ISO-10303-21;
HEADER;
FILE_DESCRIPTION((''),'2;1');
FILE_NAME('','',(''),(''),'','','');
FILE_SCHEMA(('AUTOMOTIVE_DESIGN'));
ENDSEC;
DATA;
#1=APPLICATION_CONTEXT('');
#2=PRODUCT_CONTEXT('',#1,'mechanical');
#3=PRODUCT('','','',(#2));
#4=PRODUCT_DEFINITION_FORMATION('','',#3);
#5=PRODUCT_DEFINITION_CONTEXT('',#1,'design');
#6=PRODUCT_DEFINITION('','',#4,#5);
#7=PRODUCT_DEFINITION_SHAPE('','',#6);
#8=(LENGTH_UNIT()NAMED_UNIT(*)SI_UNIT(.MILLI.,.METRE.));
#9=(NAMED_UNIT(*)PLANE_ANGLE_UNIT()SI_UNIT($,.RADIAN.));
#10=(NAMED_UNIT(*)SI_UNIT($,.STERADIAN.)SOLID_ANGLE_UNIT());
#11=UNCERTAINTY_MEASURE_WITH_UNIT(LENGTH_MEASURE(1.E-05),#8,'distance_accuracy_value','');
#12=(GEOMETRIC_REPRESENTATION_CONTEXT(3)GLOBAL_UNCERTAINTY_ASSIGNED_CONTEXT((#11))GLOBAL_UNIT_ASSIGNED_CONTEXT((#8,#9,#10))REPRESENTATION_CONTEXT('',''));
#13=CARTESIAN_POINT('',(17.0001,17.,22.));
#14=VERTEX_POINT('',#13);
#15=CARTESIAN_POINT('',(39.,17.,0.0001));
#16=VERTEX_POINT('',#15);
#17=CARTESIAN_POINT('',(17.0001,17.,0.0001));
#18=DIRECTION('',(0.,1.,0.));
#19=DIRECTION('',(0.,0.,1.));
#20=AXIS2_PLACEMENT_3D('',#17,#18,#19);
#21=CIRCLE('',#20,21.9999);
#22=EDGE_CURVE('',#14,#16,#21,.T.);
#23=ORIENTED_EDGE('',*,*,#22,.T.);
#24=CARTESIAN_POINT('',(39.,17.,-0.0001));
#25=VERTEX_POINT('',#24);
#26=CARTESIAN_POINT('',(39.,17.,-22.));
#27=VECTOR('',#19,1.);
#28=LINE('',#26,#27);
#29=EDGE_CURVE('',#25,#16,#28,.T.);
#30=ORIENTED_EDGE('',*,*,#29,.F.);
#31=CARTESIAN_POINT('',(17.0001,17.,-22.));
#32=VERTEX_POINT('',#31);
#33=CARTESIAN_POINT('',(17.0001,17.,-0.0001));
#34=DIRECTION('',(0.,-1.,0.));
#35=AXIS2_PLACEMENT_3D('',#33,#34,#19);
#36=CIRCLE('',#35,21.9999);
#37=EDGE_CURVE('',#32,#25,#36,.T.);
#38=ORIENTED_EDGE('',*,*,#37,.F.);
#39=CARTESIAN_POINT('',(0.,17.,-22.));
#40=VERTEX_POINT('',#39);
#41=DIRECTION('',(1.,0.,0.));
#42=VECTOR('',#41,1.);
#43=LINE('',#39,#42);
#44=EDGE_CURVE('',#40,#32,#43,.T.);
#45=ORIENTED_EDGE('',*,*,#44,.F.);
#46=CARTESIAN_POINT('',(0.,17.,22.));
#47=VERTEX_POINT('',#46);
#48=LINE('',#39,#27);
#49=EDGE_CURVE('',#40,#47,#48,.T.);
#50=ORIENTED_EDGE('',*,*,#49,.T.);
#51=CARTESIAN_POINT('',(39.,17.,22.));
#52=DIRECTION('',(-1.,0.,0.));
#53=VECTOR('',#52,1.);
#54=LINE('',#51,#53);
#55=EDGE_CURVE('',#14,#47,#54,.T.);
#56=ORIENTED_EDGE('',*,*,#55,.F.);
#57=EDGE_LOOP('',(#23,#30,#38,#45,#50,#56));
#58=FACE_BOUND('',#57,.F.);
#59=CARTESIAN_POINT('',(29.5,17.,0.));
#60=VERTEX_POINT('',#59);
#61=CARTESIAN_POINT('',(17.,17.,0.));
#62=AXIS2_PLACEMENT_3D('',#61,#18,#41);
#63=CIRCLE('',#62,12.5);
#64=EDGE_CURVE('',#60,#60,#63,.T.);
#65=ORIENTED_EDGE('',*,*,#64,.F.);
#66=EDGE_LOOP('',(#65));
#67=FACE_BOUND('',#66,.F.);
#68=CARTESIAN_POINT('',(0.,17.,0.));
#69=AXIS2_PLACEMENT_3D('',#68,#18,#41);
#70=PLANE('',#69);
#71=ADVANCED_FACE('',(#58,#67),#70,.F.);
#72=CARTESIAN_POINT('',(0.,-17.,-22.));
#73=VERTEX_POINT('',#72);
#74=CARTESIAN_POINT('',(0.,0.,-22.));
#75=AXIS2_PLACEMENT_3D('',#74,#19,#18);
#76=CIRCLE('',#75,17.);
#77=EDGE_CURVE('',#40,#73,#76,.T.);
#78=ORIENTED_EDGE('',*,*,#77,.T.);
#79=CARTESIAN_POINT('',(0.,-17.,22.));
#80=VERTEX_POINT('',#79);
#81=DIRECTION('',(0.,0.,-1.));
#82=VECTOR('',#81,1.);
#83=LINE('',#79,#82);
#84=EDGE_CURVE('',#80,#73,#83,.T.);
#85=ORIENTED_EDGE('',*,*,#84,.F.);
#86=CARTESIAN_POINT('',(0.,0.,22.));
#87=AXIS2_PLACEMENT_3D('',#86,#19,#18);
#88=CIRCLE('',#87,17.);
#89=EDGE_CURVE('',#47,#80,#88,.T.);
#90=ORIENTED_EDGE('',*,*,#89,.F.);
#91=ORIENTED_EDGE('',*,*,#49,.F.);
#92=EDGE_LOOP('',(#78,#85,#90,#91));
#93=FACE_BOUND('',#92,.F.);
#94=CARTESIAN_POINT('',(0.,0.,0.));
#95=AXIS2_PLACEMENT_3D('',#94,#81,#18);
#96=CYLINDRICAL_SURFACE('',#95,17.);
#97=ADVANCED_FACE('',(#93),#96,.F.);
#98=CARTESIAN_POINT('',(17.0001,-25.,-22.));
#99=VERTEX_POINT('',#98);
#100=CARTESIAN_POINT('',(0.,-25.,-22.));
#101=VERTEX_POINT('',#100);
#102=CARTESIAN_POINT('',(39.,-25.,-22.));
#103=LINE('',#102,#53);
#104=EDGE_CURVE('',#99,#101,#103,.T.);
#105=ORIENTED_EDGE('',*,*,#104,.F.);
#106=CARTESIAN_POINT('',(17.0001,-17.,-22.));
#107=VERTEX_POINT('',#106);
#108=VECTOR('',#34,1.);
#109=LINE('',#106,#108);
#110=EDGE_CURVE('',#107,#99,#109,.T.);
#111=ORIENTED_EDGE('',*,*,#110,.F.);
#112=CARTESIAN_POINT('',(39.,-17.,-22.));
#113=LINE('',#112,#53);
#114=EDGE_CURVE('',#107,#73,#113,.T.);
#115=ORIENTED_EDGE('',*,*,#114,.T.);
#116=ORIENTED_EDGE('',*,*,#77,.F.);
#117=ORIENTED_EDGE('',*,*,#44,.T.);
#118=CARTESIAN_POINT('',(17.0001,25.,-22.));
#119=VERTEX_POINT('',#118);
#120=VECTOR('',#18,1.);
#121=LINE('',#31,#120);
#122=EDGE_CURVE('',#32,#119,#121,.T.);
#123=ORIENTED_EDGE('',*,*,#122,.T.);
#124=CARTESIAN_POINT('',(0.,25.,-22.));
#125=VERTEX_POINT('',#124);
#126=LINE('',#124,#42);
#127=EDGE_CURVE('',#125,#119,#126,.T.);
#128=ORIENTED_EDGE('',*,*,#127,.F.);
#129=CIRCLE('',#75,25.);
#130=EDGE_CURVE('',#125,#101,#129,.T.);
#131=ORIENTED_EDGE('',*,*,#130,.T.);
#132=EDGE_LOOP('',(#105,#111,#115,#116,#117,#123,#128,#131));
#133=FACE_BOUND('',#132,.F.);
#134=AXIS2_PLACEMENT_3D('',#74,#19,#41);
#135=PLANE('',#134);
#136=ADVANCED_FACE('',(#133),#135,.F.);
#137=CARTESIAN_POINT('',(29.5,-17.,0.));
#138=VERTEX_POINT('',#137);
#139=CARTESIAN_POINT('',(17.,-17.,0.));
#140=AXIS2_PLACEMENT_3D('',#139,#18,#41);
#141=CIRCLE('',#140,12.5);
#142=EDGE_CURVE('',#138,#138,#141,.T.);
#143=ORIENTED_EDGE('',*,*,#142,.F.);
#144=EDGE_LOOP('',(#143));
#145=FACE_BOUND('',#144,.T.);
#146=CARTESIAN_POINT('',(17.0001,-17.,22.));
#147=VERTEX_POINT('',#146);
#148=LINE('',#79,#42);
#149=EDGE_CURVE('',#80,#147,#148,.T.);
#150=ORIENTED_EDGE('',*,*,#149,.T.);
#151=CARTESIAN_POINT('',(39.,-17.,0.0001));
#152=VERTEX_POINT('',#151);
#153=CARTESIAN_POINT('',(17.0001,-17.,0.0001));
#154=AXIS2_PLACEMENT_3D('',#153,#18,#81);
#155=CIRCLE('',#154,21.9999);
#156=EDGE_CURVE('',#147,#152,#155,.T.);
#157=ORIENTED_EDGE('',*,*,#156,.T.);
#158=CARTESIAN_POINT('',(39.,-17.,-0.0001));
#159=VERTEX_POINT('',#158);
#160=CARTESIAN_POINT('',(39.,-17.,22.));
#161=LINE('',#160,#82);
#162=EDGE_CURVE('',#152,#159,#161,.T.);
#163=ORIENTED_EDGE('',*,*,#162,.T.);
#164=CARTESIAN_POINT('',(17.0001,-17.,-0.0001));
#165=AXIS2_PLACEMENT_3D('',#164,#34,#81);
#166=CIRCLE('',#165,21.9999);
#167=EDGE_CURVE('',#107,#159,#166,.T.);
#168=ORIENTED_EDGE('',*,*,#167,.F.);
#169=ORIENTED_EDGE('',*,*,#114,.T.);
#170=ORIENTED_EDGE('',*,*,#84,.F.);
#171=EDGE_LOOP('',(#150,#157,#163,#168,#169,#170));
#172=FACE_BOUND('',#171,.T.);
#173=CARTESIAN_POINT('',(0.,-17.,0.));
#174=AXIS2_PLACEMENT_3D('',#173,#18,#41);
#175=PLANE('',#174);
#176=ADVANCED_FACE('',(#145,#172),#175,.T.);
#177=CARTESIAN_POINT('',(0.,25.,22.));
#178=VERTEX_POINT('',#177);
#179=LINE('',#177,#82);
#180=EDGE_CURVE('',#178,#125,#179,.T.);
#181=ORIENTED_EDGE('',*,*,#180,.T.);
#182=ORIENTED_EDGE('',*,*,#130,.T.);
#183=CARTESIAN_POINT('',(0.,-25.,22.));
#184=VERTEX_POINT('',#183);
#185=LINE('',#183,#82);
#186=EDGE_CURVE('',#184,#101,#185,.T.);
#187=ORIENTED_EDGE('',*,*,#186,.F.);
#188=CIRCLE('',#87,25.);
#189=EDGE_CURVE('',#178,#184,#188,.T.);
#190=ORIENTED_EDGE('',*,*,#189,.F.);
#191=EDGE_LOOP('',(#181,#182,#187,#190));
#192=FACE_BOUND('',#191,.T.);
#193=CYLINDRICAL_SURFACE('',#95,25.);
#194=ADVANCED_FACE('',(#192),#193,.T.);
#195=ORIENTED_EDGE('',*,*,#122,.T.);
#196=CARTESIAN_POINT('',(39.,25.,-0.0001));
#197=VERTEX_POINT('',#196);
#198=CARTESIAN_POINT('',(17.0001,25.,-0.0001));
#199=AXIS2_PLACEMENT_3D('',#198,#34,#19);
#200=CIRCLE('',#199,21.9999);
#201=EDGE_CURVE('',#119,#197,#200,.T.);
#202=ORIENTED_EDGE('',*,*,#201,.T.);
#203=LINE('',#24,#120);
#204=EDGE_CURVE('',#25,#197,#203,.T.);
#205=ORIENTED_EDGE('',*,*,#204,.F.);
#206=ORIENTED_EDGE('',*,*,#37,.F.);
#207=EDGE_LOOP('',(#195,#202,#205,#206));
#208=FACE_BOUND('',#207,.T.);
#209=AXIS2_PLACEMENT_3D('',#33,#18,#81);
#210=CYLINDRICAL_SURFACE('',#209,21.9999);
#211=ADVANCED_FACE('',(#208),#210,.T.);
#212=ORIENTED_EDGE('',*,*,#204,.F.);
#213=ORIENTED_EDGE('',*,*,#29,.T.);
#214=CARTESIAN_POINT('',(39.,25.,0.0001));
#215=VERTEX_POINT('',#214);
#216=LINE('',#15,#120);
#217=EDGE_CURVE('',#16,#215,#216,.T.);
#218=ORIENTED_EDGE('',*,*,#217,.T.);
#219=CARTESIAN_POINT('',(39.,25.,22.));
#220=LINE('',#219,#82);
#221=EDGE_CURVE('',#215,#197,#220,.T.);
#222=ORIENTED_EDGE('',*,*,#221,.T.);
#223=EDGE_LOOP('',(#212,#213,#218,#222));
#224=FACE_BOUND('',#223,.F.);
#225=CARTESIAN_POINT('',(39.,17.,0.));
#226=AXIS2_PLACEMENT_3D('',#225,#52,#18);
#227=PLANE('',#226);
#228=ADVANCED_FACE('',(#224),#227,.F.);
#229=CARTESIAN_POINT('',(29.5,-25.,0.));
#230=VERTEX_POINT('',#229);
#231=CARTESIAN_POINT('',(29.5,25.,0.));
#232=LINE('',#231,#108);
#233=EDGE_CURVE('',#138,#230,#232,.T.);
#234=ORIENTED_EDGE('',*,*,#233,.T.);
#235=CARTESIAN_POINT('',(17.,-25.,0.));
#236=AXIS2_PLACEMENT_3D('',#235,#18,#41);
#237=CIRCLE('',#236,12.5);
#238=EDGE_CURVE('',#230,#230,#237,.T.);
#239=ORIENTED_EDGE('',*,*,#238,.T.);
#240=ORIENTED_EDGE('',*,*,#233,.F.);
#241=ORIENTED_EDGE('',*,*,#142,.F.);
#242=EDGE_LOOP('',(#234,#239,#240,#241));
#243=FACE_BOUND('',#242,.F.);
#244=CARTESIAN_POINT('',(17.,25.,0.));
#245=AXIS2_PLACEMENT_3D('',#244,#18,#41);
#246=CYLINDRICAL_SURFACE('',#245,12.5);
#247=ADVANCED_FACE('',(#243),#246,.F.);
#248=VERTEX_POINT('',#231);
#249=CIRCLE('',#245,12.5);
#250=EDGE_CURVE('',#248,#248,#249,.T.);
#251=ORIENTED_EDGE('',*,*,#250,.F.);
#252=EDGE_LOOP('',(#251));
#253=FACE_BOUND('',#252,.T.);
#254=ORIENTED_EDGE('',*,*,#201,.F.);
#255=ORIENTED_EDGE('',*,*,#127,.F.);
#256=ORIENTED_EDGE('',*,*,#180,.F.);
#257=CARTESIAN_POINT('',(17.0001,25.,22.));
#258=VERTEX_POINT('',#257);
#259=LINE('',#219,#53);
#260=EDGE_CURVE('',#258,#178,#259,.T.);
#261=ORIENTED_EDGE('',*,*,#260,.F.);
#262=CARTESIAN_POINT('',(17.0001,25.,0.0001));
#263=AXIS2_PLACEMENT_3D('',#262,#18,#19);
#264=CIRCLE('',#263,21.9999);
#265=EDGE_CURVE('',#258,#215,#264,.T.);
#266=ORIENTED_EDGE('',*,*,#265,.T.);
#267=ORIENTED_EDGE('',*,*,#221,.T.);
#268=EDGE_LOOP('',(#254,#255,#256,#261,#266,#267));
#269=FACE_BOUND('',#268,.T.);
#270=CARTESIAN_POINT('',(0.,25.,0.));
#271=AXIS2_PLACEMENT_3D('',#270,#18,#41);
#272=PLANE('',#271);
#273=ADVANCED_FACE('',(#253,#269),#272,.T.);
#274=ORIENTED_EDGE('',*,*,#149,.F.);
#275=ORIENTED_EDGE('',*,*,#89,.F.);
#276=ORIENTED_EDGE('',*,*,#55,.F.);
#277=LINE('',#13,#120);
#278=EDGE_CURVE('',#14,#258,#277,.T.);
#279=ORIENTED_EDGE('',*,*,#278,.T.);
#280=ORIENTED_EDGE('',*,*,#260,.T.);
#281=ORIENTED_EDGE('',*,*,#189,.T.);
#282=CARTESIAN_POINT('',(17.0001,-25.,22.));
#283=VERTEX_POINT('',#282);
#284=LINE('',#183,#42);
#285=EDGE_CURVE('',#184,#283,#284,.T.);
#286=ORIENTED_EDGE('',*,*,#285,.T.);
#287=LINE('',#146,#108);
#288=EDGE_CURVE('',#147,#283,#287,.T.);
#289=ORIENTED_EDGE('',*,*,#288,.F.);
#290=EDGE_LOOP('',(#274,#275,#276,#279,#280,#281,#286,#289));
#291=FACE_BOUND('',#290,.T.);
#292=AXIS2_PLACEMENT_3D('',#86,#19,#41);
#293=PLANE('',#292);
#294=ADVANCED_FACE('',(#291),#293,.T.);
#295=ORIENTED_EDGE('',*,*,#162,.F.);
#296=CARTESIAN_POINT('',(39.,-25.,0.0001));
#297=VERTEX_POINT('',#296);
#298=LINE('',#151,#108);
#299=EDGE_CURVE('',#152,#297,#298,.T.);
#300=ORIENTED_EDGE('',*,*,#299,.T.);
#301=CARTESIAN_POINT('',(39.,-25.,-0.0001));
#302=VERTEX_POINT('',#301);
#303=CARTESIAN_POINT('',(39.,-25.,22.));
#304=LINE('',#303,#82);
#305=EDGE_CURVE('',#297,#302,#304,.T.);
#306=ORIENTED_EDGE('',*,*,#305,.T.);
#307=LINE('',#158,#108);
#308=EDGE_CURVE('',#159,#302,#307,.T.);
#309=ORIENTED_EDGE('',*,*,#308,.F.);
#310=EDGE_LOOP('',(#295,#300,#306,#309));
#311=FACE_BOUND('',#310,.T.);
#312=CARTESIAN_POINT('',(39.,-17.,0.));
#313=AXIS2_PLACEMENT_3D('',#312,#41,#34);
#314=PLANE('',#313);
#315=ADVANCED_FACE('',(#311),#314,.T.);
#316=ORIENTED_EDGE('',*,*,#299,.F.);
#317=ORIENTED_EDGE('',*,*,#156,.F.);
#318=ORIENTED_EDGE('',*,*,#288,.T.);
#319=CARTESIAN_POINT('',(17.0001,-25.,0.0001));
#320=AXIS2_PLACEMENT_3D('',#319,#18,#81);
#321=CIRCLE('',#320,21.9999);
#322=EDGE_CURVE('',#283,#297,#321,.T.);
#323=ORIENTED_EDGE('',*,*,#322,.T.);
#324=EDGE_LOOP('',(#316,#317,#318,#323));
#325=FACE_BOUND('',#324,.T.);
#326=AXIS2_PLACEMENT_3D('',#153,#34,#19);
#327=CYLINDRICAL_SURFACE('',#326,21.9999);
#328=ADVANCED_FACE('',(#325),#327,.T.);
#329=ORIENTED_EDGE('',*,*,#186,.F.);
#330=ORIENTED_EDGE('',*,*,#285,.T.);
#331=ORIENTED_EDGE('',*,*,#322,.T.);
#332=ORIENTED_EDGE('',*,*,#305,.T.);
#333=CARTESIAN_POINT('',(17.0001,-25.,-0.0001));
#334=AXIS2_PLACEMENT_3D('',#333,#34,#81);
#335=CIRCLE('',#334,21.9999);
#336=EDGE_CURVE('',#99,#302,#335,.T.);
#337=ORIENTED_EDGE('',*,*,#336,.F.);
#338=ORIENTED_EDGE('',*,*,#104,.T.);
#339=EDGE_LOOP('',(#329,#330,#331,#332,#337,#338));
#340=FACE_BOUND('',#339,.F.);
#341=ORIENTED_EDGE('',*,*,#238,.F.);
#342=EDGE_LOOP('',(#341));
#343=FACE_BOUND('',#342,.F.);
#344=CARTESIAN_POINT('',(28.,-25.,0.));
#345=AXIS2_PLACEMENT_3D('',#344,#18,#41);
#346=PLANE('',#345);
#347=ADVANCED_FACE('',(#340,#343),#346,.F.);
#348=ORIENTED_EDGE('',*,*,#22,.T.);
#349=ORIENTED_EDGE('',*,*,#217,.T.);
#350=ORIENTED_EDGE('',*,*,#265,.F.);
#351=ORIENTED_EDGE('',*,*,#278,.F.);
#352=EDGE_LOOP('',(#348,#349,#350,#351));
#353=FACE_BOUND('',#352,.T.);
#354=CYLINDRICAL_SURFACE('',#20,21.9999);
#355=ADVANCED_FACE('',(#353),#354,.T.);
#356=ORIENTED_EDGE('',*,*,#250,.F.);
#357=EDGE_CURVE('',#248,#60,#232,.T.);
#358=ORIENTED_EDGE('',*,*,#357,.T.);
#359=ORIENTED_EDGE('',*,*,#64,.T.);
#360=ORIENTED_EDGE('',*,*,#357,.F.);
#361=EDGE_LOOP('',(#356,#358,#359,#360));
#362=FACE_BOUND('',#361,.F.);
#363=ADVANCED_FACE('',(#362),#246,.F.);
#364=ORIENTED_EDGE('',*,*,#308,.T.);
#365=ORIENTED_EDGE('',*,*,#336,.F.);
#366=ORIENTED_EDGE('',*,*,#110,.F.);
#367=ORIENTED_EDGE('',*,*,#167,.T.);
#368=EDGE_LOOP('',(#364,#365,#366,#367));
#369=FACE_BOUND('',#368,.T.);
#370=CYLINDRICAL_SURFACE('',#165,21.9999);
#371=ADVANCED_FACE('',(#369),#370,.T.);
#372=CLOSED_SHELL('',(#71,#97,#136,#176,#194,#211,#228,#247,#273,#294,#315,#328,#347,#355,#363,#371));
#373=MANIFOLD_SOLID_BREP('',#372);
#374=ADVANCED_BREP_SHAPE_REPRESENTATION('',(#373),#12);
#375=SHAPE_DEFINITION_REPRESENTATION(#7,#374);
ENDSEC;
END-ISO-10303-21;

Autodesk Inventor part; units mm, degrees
ref_plane "YZ Plane" through (0, 0, 0) normal (1, 0, 0) x (0, 1, 0)
ref_plane "XZ Plane" through (0, 0, 0) normal (0, 1, 0) x (-1, 0, 0)
ref_plane "XY Plane" through (0, 0, 0) normal (0, 0, 1) x (1, 0, 0)
sketch "草圖1" plane through (0, 0, 0) normal (0, 0, 1) x (1, 0, 0)
  arc A0 (0, 17) -> (0, -17) centre (0, 0) ccw
  arc A1 (0, 25) -> (0, -25) centre (0, 0) ccw
  line L0 (0, 27.0608) -> (0, -29.1984) construction
  line L1 (0, 25) -> (28, 25)
  line L2 (0, 17) -> (28, 17)
  line L3 (28, 25) -> (39, 25)
  line L4 (28, 17) -> (39, 17)
  line L5 (39, 17) -> (39, 25)
  line L6 (0, 0) -> (33.5, 0) construction
  line L7 (0, -25) -> (28, -25)
  line L8 (0, -17) -> (28, -17)
  line L9 (28, -25) -> (39, -25)
  line L10 (28, -17) -> (39, -17)
  line L11 (39, -17) -> (39, -25)
  dimension "d0" = 34
  dimension "d1" = 50
  dimension "d2" = 28
  dimension "d3" = 11
  dimension "d4" = 11
  dimension "d5" = 34
extrude "擠出1" add sketch "草圖1" along normal mid plane 44
fillet "圓角1" radius 22 4 edges at (39, 21, 22) (39, 21, -22) (39, -21, 22) (39, -21, -22)
sketch "草圖2" plane through (0, 25, 22) normal (0, 1, 0) x (1, 0, 0)
  arc A0 (17, 0) -> (17, 44) centre (17, 22) ccw projected
  circle A1 centre (17, 22) radius 12.5
  point P0 (0, 22)
  dimension "d9" = 25
extrude "擠出2" cut sketch "草圖2" against normal blind 60
properties part number "410571040練習三"
